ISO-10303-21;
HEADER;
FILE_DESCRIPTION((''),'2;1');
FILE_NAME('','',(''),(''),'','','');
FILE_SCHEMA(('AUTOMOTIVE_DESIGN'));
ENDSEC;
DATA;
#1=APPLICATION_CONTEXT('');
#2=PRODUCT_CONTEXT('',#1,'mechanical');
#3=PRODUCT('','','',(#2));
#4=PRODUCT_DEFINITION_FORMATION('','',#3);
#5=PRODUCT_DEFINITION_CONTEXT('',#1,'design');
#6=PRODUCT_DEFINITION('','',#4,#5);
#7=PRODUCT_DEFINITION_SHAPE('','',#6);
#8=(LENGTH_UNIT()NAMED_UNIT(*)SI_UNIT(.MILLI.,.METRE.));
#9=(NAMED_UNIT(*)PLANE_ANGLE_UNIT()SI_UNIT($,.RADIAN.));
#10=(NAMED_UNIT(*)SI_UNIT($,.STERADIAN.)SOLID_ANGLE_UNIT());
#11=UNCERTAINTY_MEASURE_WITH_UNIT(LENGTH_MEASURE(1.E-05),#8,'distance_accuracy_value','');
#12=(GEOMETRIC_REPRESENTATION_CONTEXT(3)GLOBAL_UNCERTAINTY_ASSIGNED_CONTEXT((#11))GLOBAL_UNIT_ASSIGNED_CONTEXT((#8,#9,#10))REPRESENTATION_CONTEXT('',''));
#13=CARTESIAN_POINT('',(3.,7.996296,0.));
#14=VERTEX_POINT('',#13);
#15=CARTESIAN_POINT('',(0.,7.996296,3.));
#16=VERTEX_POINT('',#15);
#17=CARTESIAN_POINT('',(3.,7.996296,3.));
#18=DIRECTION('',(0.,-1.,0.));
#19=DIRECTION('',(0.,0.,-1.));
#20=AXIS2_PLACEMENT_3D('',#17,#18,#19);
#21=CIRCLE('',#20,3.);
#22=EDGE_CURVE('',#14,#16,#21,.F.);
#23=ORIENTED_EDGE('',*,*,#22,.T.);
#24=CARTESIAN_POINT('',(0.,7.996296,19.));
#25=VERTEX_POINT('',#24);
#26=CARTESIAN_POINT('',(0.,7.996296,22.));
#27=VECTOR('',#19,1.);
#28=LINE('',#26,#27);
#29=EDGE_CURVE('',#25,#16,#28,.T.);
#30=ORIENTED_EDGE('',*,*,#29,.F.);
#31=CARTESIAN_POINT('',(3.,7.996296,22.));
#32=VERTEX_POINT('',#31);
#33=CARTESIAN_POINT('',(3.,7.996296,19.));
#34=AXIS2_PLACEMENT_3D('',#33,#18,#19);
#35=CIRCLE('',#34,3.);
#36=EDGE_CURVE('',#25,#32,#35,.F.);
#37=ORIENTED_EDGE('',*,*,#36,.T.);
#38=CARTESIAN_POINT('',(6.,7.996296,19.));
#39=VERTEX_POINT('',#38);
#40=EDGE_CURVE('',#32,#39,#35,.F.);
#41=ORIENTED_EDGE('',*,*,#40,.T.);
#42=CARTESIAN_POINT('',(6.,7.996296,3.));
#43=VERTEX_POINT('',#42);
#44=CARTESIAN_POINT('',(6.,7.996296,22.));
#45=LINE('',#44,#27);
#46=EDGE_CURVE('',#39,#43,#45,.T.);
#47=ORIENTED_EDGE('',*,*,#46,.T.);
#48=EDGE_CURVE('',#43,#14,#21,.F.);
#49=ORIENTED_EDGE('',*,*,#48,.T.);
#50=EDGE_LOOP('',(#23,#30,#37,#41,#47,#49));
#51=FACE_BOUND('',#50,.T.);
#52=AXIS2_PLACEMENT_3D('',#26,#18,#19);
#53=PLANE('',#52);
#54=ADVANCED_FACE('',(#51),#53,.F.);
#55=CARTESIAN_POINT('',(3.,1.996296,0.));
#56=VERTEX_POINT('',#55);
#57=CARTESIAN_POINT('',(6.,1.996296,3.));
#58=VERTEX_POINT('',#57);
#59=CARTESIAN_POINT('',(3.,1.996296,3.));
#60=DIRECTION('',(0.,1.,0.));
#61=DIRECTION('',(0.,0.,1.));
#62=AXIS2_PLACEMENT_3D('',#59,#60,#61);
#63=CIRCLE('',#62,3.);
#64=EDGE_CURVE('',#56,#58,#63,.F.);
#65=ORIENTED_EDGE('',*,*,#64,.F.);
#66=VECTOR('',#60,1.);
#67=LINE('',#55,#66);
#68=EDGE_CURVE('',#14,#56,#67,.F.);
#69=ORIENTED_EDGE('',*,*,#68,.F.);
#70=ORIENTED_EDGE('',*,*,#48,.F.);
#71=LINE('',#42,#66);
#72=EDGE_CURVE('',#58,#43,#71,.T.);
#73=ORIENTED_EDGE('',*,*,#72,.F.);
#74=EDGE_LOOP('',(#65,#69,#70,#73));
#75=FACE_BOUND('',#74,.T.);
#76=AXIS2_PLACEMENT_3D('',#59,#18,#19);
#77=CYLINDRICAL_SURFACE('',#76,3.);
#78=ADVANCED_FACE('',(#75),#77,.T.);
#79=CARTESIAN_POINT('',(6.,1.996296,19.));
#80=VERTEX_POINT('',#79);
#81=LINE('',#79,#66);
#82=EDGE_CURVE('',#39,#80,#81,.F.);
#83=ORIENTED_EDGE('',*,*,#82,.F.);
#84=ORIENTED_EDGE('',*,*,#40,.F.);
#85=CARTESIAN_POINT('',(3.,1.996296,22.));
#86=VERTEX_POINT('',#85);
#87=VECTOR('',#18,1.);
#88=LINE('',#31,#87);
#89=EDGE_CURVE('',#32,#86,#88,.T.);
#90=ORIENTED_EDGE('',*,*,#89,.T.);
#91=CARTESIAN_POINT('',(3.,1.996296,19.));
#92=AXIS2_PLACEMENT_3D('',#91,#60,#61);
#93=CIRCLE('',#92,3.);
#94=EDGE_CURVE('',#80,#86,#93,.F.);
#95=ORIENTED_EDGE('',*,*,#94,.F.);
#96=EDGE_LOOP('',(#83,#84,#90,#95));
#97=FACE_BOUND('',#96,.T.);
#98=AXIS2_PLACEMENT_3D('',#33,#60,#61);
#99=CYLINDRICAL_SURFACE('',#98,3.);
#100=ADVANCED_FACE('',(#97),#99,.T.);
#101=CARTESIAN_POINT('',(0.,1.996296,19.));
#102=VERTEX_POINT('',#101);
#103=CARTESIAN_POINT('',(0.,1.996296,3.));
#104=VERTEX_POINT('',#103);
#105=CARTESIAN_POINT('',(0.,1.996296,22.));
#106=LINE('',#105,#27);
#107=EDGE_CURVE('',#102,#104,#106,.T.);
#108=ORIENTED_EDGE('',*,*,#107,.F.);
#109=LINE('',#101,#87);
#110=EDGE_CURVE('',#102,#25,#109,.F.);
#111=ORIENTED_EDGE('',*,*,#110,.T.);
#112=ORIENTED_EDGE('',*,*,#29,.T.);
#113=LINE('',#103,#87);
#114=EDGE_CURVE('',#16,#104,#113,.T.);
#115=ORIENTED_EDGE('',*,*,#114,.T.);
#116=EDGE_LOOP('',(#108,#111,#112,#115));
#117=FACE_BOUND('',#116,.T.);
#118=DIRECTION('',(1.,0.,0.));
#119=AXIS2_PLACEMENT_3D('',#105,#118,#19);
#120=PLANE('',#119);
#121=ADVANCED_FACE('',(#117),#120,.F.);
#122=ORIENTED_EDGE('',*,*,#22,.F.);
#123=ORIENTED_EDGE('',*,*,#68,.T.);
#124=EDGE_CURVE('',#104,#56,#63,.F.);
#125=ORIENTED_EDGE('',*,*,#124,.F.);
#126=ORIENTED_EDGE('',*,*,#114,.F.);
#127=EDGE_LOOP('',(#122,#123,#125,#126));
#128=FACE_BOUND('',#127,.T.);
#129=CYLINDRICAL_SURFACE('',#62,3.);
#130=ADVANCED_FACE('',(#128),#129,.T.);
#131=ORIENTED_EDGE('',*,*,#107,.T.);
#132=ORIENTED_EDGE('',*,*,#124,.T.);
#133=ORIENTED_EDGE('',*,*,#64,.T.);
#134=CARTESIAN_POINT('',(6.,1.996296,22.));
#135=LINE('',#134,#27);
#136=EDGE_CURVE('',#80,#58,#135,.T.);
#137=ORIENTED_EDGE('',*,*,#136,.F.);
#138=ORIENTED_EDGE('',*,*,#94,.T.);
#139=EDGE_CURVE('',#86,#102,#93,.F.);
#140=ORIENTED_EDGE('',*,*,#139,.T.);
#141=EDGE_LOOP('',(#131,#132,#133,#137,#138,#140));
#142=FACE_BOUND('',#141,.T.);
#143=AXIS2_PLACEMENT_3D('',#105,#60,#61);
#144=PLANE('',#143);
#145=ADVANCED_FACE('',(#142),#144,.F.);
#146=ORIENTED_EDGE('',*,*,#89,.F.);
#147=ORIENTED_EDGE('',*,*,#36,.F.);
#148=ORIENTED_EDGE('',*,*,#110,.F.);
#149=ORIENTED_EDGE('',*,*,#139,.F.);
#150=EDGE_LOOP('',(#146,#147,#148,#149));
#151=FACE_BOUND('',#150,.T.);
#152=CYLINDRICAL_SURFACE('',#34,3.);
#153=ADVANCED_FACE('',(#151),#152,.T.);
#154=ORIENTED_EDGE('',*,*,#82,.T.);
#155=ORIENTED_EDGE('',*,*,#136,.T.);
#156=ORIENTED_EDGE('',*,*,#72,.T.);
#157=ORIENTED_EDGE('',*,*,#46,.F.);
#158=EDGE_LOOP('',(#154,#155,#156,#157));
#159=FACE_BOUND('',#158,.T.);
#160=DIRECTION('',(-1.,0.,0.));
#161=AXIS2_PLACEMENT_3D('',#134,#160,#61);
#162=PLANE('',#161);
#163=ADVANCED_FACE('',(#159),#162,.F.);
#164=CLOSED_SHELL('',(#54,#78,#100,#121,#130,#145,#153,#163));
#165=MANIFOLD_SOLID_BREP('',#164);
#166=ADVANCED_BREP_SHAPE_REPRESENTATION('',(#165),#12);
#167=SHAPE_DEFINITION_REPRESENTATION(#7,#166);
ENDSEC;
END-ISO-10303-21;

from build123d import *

# Parameters (mm, degrees)
SKETCH1_W      = 6
SKETCH1_H      = 6
EXTRUDE1_DEPTH = 22
FILLET1_R      = 3


with BuildPart() as part:
    # Sketch1 → Extrude1 (new body)
    with BuildSketch(Plane.XY):
        with Locations((3, 4.996296296)):
            Rectangle(SKETCH1_W, SKETCH1_H)
    extrude(amount=EXTRUDE1_DEPTH)

    # Fillet1
    fillet1_edges = [part.edges().sort_by_distance(p)[0] for p in [
        (6, 4.996296296, 22),
        (0, 4.996296296, 22),
        (0, 4.996296296, 0),
        (6, 4.996296296, 0),
    ]]
    fillet(fillet1_edges, radius=FILLET1_R - 0.0001)  # a hair under: the kernel refuses the full size


solid = part.part
